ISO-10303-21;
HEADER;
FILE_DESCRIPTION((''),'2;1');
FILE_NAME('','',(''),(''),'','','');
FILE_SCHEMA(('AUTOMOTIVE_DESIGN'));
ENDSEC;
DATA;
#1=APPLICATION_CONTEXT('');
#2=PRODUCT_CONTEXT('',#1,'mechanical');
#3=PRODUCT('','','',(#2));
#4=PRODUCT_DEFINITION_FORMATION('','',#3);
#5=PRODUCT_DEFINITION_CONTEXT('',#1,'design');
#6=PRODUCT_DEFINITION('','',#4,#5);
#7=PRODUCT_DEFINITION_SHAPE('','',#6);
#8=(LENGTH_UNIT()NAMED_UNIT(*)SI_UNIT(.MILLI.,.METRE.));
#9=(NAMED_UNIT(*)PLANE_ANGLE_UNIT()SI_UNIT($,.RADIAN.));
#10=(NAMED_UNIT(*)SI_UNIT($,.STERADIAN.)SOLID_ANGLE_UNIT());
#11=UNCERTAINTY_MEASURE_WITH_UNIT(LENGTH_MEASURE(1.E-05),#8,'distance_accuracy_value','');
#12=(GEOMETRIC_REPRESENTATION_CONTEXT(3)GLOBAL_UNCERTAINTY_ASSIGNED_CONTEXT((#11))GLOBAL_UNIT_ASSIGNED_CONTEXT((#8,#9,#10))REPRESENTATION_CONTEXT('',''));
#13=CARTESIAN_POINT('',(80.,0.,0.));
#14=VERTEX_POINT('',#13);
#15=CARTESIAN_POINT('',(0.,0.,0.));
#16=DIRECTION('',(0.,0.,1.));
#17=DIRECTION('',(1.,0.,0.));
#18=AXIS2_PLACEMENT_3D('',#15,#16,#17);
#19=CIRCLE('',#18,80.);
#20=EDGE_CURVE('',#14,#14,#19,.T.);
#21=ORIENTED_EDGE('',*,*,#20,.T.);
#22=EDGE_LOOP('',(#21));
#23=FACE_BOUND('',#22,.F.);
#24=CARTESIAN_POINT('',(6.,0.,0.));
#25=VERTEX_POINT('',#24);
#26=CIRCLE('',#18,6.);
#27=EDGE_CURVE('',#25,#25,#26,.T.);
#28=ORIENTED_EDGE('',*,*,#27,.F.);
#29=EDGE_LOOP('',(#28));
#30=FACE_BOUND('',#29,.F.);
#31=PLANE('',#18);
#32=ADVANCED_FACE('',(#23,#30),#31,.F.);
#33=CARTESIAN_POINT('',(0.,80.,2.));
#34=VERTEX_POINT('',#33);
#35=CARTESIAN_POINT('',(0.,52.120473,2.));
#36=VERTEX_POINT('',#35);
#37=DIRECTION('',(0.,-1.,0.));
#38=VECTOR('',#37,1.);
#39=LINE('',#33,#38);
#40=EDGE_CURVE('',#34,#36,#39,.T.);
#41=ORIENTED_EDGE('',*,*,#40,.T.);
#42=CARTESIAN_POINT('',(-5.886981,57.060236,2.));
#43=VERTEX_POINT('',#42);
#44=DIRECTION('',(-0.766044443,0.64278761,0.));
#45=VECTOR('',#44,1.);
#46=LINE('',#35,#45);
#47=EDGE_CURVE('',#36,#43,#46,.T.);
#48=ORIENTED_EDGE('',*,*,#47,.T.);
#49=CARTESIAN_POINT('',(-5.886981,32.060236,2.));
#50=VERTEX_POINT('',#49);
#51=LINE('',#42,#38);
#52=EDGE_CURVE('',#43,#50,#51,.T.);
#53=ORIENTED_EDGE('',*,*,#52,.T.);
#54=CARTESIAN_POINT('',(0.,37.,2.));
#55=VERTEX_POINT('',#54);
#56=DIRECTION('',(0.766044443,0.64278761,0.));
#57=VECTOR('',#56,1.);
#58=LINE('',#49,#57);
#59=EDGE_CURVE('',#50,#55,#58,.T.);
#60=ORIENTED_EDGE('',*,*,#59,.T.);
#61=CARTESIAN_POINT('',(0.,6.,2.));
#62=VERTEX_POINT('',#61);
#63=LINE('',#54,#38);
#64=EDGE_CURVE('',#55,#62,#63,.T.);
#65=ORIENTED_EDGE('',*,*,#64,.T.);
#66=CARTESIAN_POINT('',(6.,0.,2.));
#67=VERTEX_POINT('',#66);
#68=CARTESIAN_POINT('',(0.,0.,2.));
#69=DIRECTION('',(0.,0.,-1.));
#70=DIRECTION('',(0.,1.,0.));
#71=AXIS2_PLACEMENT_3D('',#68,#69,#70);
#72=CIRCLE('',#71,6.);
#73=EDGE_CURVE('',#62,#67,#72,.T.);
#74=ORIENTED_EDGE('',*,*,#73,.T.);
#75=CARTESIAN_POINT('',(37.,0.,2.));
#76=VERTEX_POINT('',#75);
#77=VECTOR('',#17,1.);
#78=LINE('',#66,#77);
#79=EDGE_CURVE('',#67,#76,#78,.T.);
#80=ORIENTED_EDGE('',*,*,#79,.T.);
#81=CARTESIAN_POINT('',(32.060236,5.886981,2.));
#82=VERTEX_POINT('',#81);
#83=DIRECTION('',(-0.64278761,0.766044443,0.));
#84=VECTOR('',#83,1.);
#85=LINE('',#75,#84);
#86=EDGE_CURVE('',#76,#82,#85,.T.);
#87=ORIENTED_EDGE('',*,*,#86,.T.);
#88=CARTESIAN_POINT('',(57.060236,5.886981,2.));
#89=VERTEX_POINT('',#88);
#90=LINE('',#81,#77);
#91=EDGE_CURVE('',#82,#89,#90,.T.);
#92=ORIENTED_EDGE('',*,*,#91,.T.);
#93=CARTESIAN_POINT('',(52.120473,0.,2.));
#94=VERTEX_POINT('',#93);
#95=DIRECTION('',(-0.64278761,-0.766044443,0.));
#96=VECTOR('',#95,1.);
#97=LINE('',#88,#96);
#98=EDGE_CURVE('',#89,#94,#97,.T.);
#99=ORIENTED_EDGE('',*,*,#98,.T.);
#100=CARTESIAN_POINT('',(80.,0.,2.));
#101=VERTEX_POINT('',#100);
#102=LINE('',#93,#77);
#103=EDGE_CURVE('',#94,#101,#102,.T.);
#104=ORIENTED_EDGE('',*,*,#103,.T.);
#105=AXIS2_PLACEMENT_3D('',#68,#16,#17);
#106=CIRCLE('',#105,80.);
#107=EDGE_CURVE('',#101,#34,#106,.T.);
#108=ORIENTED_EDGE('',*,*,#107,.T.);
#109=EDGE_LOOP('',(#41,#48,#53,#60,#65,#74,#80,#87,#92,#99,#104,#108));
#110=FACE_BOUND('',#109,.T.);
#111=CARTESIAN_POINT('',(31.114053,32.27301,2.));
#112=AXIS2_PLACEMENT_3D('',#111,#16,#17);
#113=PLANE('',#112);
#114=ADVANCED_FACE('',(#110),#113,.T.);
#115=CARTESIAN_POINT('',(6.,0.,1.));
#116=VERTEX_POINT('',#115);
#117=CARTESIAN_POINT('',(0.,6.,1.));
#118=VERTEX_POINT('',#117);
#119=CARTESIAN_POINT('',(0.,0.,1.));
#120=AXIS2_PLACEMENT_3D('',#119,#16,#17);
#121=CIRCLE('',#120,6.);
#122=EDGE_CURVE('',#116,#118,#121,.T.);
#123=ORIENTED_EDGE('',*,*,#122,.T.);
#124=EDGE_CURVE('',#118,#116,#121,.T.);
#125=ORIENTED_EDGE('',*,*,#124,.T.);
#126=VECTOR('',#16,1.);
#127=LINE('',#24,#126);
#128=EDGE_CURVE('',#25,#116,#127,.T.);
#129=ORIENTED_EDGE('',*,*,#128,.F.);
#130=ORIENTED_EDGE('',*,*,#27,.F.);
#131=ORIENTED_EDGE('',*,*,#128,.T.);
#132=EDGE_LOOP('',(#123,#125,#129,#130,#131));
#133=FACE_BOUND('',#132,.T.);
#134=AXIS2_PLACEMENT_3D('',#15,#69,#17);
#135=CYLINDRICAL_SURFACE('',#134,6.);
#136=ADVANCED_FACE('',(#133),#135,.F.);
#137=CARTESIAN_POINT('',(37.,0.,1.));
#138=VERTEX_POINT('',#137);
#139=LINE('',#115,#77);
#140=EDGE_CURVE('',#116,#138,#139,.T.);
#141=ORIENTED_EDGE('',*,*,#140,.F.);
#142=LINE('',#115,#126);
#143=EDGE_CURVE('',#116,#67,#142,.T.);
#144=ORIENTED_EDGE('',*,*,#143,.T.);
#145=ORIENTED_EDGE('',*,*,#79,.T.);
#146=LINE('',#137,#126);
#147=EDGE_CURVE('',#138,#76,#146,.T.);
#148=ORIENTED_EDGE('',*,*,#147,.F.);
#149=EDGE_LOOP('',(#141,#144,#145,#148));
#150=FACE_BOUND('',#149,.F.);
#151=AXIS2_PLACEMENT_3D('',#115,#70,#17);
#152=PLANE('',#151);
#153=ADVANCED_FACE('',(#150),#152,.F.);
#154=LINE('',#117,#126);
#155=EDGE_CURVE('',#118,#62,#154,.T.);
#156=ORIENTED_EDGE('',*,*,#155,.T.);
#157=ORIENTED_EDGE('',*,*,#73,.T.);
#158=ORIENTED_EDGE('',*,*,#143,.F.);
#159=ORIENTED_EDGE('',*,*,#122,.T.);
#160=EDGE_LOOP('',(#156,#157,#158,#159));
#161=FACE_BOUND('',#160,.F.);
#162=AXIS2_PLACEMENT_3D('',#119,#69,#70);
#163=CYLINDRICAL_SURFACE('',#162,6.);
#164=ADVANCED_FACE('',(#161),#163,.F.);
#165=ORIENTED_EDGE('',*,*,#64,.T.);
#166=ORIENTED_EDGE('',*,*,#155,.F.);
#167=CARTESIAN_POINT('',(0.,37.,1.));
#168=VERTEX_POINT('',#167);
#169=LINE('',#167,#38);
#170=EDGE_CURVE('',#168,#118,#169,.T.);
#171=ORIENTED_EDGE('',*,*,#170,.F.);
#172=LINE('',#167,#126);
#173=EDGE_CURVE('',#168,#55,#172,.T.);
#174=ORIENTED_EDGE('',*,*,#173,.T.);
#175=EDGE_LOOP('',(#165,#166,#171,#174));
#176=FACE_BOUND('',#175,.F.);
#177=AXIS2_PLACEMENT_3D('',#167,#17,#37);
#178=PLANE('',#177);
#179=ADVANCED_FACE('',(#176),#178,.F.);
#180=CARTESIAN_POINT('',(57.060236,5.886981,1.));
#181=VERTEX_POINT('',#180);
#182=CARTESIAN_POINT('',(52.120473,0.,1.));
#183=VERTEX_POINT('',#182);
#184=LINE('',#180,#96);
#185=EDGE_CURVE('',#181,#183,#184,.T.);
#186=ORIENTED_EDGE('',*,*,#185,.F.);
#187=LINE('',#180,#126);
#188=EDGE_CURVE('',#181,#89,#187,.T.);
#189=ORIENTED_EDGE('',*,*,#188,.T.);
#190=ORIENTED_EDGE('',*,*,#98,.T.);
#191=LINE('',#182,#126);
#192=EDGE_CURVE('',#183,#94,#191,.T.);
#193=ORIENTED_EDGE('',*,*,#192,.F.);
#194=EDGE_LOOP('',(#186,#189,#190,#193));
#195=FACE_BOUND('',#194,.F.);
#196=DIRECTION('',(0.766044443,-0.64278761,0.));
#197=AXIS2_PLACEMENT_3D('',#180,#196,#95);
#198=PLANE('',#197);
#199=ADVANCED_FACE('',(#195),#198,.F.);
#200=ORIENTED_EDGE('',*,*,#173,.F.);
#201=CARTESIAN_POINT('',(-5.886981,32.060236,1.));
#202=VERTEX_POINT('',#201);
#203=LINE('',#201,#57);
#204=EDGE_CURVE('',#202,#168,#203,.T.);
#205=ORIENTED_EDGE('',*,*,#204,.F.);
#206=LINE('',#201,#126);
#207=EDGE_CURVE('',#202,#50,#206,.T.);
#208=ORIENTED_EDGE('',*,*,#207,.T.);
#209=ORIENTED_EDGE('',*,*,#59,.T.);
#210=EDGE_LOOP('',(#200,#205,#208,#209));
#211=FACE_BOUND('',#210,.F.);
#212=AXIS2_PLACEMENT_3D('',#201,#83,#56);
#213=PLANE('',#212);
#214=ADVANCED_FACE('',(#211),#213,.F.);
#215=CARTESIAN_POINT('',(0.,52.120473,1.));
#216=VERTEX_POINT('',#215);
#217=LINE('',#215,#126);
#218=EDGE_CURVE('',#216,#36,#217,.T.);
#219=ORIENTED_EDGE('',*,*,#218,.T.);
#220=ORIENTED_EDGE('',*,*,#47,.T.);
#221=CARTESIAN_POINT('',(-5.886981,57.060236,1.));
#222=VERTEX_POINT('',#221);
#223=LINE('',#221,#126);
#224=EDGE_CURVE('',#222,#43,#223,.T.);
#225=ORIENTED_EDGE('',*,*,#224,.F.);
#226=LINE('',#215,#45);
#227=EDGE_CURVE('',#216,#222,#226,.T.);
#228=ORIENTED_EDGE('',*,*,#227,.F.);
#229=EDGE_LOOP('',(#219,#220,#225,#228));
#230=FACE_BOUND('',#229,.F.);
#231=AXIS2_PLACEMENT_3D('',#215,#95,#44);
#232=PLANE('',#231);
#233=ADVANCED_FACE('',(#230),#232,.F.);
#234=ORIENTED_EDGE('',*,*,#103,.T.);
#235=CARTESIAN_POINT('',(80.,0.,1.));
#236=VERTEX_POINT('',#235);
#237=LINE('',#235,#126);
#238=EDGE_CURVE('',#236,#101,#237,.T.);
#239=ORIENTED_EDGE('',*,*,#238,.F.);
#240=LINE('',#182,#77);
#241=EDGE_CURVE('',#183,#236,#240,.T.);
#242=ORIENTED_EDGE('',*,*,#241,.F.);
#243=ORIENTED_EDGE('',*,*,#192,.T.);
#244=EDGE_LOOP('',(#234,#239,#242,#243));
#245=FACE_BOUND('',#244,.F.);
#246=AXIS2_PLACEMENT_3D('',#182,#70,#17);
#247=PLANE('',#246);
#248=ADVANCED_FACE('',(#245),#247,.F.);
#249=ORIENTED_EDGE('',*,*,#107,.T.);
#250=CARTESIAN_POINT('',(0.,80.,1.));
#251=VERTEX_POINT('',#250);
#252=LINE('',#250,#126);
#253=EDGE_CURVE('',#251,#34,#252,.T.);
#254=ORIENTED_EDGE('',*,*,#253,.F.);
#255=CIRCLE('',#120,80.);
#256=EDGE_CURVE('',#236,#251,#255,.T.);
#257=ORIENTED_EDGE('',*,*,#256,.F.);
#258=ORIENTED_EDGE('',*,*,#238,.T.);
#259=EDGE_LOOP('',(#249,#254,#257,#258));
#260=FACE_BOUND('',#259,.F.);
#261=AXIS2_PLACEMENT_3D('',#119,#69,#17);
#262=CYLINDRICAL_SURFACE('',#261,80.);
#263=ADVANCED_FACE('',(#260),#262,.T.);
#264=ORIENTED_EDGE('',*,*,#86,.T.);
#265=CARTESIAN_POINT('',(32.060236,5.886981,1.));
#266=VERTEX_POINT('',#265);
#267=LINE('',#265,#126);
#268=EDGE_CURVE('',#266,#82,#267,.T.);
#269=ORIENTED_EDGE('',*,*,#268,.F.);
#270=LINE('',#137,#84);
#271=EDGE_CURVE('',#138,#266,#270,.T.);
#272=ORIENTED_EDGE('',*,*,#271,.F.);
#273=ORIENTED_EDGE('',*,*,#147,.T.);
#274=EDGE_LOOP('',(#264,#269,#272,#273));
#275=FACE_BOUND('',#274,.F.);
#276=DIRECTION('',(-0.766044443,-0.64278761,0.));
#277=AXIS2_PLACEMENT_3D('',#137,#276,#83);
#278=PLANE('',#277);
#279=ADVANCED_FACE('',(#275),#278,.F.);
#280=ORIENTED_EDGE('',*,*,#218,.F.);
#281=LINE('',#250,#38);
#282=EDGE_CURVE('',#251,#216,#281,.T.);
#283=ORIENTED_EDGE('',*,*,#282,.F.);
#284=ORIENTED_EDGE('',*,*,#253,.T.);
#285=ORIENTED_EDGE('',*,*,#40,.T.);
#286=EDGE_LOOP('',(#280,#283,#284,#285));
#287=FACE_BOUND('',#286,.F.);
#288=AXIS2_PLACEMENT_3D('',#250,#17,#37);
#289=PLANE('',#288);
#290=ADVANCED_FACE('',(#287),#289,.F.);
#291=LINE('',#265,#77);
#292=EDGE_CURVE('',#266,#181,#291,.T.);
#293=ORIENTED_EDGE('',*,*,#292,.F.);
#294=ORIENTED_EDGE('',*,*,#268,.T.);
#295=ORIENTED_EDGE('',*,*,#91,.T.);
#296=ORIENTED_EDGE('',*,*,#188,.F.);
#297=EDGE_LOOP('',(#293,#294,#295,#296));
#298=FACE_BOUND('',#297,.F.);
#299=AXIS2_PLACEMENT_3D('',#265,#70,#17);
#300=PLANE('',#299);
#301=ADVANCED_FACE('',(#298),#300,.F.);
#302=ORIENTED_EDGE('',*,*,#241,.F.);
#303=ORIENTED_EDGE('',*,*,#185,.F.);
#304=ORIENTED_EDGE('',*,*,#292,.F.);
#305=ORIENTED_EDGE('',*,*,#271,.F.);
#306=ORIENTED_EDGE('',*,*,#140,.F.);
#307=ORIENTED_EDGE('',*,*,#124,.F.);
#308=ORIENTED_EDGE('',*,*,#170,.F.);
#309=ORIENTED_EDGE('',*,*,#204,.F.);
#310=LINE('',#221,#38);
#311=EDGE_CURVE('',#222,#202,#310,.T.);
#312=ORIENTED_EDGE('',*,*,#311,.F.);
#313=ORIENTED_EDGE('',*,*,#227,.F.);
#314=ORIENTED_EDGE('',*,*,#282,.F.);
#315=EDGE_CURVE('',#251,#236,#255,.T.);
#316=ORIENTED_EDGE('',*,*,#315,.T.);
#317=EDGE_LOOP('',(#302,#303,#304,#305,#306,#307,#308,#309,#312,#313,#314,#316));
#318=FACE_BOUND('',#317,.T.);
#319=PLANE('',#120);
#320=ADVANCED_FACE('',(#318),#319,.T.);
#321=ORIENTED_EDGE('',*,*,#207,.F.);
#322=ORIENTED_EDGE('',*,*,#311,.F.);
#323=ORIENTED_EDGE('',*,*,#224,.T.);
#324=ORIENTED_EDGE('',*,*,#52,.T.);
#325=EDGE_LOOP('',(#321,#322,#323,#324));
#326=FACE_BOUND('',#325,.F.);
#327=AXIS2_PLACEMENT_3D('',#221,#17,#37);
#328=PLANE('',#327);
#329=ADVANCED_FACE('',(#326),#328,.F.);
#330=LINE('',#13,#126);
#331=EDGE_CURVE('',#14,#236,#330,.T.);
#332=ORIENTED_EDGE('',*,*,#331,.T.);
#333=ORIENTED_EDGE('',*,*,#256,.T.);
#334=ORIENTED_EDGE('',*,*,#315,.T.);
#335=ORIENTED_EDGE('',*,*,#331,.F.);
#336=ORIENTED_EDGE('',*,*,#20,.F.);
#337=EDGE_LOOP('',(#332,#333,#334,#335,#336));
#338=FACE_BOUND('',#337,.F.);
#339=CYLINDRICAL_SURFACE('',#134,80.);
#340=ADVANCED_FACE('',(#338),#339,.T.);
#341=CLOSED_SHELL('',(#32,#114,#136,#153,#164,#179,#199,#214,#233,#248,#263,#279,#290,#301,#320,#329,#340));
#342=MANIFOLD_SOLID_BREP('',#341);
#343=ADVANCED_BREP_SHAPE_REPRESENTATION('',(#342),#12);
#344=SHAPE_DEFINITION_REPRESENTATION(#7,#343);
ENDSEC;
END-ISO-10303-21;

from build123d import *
from build123d import SkipClean  # not in build123d's __all__

# Parameters (mm, degrees)
F0_R     = 80
F0_R_2   = 6
F1_DEPTH = 1
F3_DEPTH = 1


with BuildPart() as f1:
    # F0 (on Top) → F1 (new body)
    with BuildSketch(Plane.XY):
        Circle(F0_R)
        Circle(F0_R_2, mode=Mode.SUBTRACT)
    extrude(amount=F1_DEPTH)

    # F2 (on face) → F3 (join)
    with BuildSketch(Plane.XY.offset(1)):
        with BuildLine():
            ThreePointArc((80, 0), (56.5685424949, 56.5685424949), (0, 80))
            Line((0, 80), (0, 52.1204726901))
            Line((0, 52.1204726901), (-5.8869810823, 57.0602363451))
            Line((-5.8869810823, 57.0602363451), (-5.8869810823, 32.0602363451))
            Line((-5.8869810823, 32.0602363451), (0, 37))
            Line((0, 37), (0, 6))
            ThreePointArc((0, 6), (4.2426406871, 4.2426406871), (6, 0))
            Line((6, 0), (37, 0))
            Line((37, 0), (32.0602363451, 5.8869810823))
            Line((32.0602363451, 5.8869810823), (57.0602363451, 5.8869810823))
            Line((57.0602363451, 5.8869810823), (52.1204726901, 0))
            Line((52.1204726901, 0), (80, 0))
        make_face()
    with SkipClean():  # cleaning this boolean's faces spoils the solid; the shape is the same uncleaned
        extrude(amount=F3_DEPTH)


solid = f1.part
